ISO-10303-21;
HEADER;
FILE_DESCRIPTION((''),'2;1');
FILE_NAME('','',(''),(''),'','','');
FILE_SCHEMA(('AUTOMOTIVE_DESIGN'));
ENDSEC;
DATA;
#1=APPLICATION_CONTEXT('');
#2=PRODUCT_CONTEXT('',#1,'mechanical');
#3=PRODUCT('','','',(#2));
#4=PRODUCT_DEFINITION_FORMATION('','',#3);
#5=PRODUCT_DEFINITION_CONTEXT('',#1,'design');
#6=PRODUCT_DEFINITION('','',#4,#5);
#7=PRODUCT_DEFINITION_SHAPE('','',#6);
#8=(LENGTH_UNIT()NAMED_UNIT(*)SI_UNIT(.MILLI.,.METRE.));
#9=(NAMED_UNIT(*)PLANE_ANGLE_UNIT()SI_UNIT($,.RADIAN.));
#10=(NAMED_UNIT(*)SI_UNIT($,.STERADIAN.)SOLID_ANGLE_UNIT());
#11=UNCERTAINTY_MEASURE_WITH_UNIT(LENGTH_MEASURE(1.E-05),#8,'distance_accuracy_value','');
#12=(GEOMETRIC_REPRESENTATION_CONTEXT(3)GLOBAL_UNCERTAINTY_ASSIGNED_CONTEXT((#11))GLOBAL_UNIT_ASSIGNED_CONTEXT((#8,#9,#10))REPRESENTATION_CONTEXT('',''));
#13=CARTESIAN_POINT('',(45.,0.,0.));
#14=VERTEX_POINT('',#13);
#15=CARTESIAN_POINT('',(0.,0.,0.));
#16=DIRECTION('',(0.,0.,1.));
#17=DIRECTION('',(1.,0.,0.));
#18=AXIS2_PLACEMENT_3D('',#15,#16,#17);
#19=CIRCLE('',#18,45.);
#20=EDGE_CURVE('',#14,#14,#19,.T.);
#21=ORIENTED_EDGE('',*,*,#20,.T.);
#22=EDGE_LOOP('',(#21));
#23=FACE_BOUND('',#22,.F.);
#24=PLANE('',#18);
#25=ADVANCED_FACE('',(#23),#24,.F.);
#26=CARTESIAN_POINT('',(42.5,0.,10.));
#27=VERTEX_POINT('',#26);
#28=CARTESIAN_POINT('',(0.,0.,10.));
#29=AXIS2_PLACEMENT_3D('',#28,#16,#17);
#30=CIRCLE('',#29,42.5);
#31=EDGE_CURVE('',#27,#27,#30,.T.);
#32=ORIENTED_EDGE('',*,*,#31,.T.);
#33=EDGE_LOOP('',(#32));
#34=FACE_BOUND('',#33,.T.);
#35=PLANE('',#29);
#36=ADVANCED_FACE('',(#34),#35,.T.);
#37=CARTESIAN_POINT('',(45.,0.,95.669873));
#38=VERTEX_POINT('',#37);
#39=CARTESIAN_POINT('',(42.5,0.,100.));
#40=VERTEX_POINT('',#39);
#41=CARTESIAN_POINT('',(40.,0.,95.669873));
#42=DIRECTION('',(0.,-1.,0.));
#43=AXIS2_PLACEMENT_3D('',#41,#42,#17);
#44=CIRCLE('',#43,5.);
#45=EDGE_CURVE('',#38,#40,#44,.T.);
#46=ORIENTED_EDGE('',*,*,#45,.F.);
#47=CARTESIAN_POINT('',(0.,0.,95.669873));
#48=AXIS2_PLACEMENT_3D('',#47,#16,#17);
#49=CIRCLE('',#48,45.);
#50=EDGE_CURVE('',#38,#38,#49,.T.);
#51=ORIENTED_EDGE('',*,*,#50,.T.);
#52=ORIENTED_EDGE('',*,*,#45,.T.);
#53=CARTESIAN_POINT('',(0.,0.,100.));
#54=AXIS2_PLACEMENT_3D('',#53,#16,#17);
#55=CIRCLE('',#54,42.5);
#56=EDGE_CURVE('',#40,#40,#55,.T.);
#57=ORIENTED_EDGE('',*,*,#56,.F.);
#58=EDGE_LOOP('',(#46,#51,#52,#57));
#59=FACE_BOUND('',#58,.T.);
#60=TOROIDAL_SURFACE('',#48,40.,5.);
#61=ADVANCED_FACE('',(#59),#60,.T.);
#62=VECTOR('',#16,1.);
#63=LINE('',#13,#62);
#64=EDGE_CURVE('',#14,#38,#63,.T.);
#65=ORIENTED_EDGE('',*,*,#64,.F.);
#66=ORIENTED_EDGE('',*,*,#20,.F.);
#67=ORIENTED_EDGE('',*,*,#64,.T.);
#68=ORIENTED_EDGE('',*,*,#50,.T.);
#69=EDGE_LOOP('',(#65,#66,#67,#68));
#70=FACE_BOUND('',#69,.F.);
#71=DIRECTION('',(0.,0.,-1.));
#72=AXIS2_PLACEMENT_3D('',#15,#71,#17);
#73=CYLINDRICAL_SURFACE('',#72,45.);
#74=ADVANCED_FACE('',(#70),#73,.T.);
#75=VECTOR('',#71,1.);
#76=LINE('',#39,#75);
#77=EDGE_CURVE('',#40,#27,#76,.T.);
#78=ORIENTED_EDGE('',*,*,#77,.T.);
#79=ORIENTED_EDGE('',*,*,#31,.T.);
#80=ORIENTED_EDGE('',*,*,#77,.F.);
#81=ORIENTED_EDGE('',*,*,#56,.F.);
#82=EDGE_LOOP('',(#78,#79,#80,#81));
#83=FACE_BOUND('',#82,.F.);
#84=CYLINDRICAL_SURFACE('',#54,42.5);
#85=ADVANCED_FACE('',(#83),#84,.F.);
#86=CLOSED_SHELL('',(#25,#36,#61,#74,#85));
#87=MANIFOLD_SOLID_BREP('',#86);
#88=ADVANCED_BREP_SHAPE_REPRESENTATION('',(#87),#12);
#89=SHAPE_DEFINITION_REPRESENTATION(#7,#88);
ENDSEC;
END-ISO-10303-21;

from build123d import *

# Parameters (mm, degrees)
F0_R     = 45
F1_DEPTH = 100
F3_R     = 42.5
F4_DEPTH = 90


# Not quite as in the source:
# - a fillet or chamfer that OpenCascade refuses, or shapes differently, is made with other operations: its cross-section is extruded or revolved along the edge and cut away or added


with BuildPart() as f1:
    # F0 (on Top) → F1 (new body)
    with BuildSketch(Plane.XY):
        Circle(F0_R)
    extrude(amount=F1_DEPTH)

    # F3 (on face) → F4 (cut)
    with BuildSketch(Plane.XY.offset(100)):
        Circle(F3_R)
    extrude(amount=-F4_DEPTH, mode=Mode.SUBTRACT)

    # F5: fillet of radius 5 on 1 edges, made by hand

    # F5_s1 → F5_t2 (revolve, cut)
    with BuildSketch(Plane.XZ):
        with BuildLine():
            ThreePointArc((45, 95.6698729811), (44.3301270189, 98.1698729811), (42.5, 100))
            Line((42.5, 100), (45, 100))
            Line((45, 100), (45, 95.6698729811))
        make_face()
    revolve(axis=Axis((0, 0, 100), (0, 0, 1)), mode=Mode.SUBTRACT)


solid = f1.part
